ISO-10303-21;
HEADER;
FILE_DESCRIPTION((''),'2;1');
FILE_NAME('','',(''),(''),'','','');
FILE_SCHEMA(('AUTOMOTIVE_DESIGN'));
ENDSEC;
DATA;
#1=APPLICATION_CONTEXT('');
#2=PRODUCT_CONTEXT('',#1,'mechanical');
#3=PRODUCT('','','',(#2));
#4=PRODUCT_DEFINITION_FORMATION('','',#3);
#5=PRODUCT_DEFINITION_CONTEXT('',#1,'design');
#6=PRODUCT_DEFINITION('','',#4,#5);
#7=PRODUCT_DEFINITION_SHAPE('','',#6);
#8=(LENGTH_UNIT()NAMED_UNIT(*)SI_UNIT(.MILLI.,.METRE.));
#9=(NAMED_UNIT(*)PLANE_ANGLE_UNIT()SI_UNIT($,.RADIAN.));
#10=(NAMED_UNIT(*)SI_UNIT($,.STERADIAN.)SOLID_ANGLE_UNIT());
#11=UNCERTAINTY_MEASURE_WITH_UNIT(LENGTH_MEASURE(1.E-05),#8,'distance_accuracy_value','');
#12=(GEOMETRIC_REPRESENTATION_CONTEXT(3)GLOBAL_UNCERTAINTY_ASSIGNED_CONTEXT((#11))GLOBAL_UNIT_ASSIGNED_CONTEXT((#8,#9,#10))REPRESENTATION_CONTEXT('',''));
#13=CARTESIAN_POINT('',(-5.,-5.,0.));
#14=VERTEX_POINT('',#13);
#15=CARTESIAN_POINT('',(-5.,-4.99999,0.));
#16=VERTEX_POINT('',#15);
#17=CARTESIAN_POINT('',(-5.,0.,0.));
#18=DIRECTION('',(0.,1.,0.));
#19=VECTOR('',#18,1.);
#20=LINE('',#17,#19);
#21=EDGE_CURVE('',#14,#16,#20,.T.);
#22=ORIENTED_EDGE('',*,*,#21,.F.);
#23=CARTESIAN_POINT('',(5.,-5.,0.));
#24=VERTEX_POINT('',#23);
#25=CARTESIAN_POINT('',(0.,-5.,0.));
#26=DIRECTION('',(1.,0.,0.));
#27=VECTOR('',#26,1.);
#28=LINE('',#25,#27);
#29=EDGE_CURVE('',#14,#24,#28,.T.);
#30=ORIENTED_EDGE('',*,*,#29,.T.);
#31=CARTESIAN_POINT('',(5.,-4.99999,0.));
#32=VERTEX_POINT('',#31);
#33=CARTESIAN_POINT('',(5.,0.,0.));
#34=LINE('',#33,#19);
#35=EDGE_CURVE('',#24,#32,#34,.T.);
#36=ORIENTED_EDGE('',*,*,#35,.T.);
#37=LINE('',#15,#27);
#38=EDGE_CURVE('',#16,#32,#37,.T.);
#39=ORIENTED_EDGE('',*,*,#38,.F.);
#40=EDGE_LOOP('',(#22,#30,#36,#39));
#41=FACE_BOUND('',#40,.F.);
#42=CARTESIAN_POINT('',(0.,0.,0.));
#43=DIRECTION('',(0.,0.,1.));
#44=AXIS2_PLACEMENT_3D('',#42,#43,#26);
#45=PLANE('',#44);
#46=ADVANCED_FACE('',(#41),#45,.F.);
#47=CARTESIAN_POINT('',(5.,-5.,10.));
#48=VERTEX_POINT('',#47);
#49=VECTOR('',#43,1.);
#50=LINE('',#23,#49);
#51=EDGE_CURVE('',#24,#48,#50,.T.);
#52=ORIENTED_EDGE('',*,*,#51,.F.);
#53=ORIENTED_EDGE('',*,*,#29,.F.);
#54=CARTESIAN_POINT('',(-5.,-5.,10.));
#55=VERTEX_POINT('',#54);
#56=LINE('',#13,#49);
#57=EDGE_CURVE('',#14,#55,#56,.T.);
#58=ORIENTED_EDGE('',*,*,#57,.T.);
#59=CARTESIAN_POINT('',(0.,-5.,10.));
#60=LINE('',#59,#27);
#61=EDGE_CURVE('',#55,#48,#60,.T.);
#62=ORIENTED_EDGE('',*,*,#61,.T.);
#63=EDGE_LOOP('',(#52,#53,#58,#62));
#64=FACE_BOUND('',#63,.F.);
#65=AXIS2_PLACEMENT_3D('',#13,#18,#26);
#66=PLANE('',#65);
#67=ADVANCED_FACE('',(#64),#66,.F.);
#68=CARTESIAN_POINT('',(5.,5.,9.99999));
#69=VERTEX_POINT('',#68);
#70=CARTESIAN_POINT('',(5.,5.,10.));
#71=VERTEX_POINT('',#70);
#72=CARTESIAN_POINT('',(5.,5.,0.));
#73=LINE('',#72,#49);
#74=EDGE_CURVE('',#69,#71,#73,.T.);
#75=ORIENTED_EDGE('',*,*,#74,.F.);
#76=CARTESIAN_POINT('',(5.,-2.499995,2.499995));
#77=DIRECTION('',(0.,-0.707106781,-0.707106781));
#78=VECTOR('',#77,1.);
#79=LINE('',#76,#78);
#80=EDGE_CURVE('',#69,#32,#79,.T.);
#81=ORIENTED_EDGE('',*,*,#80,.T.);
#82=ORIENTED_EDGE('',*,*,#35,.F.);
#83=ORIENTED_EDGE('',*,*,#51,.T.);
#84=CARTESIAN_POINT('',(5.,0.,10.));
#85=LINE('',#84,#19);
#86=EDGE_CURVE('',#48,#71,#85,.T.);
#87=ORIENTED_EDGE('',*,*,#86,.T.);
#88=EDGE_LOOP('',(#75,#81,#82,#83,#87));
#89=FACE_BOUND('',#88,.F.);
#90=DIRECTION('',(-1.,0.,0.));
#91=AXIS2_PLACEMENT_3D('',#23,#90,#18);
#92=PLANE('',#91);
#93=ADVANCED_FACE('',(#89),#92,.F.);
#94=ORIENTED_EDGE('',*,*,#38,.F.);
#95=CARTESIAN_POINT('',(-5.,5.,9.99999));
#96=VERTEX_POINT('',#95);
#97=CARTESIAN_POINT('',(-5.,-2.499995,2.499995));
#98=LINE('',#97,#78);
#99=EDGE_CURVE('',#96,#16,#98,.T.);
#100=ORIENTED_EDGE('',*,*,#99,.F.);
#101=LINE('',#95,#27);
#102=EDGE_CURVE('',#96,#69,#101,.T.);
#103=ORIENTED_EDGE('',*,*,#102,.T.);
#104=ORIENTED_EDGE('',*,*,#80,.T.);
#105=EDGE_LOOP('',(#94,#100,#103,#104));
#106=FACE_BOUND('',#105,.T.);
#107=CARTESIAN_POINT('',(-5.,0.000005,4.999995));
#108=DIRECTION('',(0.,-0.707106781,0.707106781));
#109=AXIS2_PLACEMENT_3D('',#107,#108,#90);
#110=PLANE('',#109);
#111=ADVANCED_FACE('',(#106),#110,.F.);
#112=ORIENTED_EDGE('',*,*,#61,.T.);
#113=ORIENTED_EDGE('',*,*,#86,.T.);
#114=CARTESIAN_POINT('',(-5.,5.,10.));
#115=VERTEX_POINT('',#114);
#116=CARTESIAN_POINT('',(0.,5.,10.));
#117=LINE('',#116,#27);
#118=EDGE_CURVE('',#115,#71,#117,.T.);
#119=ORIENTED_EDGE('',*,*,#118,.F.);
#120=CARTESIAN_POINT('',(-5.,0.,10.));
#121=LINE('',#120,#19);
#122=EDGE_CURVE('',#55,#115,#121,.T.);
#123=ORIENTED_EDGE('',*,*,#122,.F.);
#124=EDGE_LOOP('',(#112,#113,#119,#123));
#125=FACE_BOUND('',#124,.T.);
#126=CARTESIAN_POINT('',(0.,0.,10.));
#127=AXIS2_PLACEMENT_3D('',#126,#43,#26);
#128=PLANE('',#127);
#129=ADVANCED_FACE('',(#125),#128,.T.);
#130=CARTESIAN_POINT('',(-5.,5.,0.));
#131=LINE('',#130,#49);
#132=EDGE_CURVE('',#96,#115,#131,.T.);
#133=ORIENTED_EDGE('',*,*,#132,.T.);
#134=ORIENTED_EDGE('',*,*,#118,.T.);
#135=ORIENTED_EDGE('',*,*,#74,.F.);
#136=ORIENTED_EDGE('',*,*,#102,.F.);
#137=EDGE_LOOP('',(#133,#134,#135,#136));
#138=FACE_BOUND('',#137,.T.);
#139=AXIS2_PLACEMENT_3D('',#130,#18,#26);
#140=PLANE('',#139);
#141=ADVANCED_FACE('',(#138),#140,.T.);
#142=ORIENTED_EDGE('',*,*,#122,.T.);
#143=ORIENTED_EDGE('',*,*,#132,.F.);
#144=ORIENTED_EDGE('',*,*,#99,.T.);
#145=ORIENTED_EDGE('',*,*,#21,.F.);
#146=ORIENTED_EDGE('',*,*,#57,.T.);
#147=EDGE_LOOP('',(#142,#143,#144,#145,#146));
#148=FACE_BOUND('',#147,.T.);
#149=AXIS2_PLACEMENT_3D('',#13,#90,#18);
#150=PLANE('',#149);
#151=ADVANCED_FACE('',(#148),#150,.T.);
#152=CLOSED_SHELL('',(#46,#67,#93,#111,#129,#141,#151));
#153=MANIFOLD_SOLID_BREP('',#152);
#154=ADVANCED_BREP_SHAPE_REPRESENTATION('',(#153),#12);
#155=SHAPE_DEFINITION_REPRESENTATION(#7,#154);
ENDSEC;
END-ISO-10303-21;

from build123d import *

# Parameters (mm, degrees)
F0_W     = 10
F0_H     = 10
F1_DEPTH = 10
F2_SIZE  = 9.99999


# Not quite as in the source:
# - a fillet or chamfer is up to 0.001 mm smaller than in the source, because OpenCascade refuses the exact size


with BuildPart() as f1:
    # F0 (on Top) → F1 (new body)
    with BuildSketch(Plane.XY):
        Rectangle(F0_W, F0_H)
    extrude(amount=F1_DEPTH)

    # F2 (size 10 in the source; OpenCascade refuses exactly that, so slightly less here)
    f2_edges = [f1.edges().sort_by_distance(p)[0] for p in [
        (0, 5, 0),
    ]]
    chamfer(f2_edges, length=F2_SIZE)


solid = f1.part
